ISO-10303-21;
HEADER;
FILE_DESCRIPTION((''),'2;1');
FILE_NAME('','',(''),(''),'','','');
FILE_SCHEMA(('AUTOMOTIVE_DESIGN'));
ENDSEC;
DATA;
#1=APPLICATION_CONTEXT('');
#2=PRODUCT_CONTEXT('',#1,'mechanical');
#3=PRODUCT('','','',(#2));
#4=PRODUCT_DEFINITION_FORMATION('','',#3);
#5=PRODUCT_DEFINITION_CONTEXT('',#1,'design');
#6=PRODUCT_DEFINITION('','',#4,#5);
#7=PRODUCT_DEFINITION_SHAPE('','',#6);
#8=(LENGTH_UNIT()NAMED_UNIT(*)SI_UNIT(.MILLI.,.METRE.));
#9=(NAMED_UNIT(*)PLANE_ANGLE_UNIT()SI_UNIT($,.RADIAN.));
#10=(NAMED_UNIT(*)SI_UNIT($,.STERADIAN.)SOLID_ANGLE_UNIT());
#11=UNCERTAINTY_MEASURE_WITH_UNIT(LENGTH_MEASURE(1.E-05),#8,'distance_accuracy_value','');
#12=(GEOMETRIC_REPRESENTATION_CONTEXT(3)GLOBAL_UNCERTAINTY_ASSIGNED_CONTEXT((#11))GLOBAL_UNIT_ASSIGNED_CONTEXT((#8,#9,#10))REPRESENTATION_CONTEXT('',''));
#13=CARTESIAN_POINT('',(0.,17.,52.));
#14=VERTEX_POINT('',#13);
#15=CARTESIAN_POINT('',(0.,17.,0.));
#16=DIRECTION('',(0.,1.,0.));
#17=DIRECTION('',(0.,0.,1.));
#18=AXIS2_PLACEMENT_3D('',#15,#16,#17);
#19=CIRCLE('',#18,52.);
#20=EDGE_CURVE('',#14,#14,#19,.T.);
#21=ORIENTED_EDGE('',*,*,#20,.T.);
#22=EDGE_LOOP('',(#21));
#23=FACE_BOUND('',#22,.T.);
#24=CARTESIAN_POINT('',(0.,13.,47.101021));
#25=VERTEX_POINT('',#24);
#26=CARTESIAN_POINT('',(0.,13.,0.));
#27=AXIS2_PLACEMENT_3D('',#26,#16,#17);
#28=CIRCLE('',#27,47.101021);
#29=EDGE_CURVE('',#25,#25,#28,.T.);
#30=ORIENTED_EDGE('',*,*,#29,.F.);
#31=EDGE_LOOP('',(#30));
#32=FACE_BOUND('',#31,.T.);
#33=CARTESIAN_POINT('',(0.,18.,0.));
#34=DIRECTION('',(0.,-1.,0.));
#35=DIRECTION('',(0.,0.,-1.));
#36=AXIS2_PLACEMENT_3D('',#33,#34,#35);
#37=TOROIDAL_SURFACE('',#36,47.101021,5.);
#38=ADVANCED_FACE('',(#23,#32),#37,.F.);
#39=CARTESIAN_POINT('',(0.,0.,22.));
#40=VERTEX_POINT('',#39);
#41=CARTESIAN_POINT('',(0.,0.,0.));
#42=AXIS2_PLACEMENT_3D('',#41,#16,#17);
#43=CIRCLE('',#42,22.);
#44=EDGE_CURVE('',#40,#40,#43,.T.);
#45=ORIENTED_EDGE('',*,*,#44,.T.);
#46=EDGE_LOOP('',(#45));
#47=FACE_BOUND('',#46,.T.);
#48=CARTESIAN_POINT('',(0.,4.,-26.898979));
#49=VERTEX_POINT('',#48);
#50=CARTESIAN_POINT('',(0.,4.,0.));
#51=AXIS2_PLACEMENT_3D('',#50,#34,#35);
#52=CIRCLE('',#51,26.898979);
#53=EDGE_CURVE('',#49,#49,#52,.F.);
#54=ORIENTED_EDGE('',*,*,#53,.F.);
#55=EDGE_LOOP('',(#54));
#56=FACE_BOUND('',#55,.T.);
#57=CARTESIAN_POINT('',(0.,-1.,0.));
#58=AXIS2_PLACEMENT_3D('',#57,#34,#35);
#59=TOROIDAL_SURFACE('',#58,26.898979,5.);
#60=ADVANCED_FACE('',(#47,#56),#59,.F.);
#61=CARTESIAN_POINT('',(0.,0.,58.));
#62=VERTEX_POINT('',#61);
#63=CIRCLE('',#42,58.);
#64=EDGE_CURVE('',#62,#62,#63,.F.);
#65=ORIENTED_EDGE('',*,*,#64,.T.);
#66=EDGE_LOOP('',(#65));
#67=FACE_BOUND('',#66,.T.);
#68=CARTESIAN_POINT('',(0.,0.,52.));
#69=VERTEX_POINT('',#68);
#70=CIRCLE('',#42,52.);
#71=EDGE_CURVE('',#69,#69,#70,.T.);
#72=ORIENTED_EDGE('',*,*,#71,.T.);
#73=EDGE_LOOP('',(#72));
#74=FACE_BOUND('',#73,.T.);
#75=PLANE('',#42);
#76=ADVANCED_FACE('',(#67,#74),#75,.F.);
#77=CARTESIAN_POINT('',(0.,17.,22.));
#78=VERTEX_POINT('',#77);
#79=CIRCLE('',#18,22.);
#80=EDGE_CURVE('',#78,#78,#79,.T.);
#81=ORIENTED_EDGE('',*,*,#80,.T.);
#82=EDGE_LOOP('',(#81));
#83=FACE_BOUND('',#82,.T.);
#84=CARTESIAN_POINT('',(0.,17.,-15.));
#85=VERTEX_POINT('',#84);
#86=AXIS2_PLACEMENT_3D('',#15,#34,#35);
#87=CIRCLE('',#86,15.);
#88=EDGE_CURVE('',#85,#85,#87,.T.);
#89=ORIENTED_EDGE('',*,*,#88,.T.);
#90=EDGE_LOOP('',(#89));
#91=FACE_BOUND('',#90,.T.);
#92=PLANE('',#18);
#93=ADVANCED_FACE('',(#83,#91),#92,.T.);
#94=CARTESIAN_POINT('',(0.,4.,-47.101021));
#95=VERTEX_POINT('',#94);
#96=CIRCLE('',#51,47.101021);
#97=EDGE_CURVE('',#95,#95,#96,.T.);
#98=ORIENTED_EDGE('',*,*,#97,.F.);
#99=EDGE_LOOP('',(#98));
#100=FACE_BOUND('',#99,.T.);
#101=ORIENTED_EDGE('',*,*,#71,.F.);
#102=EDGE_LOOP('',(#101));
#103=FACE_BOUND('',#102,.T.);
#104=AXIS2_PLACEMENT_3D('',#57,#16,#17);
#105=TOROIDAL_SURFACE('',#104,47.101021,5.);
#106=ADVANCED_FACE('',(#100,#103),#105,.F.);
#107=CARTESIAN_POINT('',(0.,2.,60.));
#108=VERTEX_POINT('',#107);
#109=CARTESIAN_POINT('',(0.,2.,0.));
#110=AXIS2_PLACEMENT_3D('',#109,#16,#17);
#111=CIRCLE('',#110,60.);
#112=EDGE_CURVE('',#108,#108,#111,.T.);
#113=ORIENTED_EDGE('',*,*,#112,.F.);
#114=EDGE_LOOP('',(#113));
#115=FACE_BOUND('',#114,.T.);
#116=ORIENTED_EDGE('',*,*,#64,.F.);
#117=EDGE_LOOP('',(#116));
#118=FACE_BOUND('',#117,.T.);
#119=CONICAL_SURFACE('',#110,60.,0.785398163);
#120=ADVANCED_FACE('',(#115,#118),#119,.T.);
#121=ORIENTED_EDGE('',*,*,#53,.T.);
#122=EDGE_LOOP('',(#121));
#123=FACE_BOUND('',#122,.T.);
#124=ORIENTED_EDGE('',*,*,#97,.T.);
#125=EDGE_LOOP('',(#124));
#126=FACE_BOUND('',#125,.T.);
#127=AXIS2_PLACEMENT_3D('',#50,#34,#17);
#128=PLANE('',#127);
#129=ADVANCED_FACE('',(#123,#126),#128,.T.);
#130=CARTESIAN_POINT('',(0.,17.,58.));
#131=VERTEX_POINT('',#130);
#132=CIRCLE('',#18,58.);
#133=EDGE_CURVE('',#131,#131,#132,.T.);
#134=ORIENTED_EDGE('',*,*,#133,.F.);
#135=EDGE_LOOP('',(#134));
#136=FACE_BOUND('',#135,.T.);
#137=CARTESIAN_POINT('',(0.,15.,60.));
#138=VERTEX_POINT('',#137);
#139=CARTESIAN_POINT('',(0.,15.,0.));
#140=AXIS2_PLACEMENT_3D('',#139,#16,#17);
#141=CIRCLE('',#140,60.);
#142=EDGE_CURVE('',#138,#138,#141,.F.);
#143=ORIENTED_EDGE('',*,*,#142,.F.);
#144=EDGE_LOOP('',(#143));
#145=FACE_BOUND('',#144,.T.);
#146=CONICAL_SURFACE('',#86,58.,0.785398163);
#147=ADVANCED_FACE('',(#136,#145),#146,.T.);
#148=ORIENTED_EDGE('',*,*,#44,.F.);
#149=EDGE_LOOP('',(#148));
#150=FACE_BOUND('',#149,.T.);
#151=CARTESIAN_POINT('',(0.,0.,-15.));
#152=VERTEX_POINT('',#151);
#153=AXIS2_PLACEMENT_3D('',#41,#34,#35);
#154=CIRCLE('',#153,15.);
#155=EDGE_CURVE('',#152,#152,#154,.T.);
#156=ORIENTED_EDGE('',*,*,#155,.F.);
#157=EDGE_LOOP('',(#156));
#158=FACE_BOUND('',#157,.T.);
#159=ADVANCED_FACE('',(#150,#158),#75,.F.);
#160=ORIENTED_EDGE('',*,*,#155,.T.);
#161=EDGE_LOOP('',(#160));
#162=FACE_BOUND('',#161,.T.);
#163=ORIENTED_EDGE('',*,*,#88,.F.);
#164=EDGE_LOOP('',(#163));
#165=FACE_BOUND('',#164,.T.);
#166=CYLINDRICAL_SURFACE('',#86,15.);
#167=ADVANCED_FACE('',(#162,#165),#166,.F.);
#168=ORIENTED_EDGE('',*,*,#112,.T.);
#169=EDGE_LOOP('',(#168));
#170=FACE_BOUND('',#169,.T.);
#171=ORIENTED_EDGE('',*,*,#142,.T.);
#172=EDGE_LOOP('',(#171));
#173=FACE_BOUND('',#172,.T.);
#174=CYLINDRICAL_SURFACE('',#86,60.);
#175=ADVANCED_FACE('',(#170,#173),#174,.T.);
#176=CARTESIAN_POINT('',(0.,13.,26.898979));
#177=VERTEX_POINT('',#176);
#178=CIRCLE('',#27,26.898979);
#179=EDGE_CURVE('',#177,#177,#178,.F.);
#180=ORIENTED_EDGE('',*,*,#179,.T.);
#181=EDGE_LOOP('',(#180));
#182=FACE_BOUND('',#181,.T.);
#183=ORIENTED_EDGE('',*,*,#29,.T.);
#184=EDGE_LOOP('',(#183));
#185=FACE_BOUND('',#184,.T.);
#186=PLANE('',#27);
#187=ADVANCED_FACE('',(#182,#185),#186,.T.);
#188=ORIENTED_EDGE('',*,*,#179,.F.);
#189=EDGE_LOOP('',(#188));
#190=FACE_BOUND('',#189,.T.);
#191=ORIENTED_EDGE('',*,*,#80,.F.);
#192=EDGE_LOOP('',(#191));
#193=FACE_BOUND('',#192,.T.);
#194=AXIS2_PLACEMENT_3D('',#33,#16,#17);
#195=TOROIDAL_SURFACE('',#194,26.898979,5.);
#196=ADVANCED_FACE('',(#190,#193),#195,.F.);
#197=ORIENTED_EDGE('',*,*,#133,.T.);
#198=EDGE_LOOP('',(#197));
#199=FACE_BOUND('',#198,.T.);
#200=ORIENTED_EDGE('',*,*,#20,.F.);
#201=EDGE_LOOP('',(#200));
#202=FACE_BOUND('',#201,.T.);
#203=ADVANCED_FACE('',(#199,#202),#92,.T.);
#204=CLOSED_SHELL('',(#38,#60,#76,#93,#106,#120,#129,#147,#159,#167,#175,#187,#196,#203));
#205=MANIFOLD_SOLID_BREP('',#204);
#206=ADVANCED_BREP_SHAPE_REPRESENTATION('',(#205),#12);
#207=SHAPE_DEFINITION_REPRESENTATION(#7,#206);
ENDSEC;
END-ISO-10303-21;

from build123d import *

# Parameters (mm, degrees)
SKETCH1_R           = 60
BOSS_EXTRUDE1_DEPTH = 17
SKETCH2_R           = 52
SKETCH2_R_2         = 22
CUT_EXTRUDE1_DEPTH  = 4
FILLET1_R           = 5
CHAMFER1_SIZE       = 2
SKETCH3_R           = 15
CUT_EXTRUDE2_DEPTH  = 87.539008545


with BuildPart() as part:
    # Sketch1 → Boss-Extrude1 (new body)
    with BuildSketch(Plane(origin=(0, 0, 0), x_dir=(1, 0, 0), z_dir=(0, 1, 0))):
        with Locations(Location((0, 0, 0), (0, 0, 270))):
            Circle(SKETCH1_R)
    extrude(amount=BOSS_EXTRUDE1_DEPTH)

    # Sketch2 → Cut-Extrude1 (cut)
    with BuildSketch(Plane(origin=(0, 17, 0), x_dir=(1, 0, 0), z_dir=(0, 1, 0))):
        with Locations(Location((0, 0, 0), (0, 0, 270))):
            Circle(SKETCH2_R)
        with Locations(Location((0, 0, 0), (0, 0, 270))):
            Circle(SKETCH2_R_2, mode=Mode.SUBTRACT)
    cut_extrude1 = extrude(amount=-CUT_EXTRUDE1_DEPTH, mode=Mode.SUBTRACT)

    # Mirror1: Cut-Extrude1 across plane
    add(cut_extrude1.mirror(Plane.ZX.offset(8.5)), mode=Mode.SUBTRACT)

    # Fillet1
    # the kernel refuses this fillet: 5 mm, written as the material it adds along each edge
    with BuildSketch(Plane(origin=(0, 4, 0), x_dir=(0, 0, 1), z_dir=(-1, 0, 0))) as fillet1_piece_1:
        with BuildLine():
            CenterArc((47.101020514, -5), FILLET1_R, 11.536959033, 78.463040967)
            Line((47.101020514, 0), (47.101020514, 0.1))
            Line((47.101020514, 0.1), (52, 0.1))
            Line((52, 0.1), (52.1, 0))
            ThreePointArc((52.1, 0), (52.1, -2), (52.09797959, -3.98))
            Line((52.09797959, -3.98), (52, -4))
        make_face()
    revolve(axis=Axis((0, 4, 0), (0, 1, 0)))
    with BuildSketch(Plane(origin=(0, 4, 0), x_dir=(0, 0, 1), z_dir=(-1, 0, 0))) as fillet1_piece_2:
        with BuildLine():
            CenterArc((26.898979486, -5), FILLET1_R, 90, 78.463040967)
            Line((22, -4), (21.90202041, -3.98))
            ThreePointArc((21.90202041, -3.98), (21.9, -2), (21.9, 0))
            Line((21.9, 0), (22, 0.1))
            Line((22, 0.1), (26.898979486, 0.1))
            Line((26.898979486, 0.1), (26.898979486, 0))
        make_face()
    revolve(axis=Axis((0, 4, 0), (0, 1, 0)))
    with BuildSketch(Plane(origin=(0, 13, 0), x_dir=(0, 0, 1), z_dir=(-1, 0, 0))) as fillet1_piece_3:
        with BuildLine():
            CenterArc((47.101020514, 5), FILLET1_R, 270, 78.463040967)
            Line((47.101020514, 0), (47.101020514, -0.1))
            Line((47.101020514, -0.1), (52, -0.1))
            Line((52, -0.1), (52.1, 0))
            ThreePointArc((52.1, 0), (52.1, 2), (52.09797959, 3.98))
            Line((52.09797959, 3.98), (52, 4))
        make_face()
    revolve(axis=Axis((0, 13, 0), (0, 1, 0)))
    with BuildSketch(Plane(origin=(0, 13, 0), x_dir=(0, 0, 1), z_dir=(-1, 0, 0))) as fillet1_piece_4:
        with BuildLine():
            CenterArc((26.898979486, 5), FILLET1_R, 191.536959033, 78.463040967)
            Line((22, 4), (21.90202041, 3.98))
            ThreePointArc((21.90202041, 3.98), (21.9, 2), (21.9, 0))
            Line((21.9, 0), (22, -0.1))
            Line((22, -0.1), (26.898979486, -0.1))
            Line((26.898979486, -0.1), (26.898979486, 0))
        make_face()
    revolve(axis=Axis((0, 13, 0), (0, 1, 0)))

    # Chamfer1
    chamfer1_edges = [part.edges().sort_by_distance(p)[0] for p in [
        (0, 0, -60),
        (0, 17, -60),
    ]]
    chamfer(chamfer1_edges, length=CHAMFER1_SIZE)

    # Sketch3 → Cut-Extrude2 (cut, through all)
    with BuildSketch(Plane.XZ):
        with Locations(Location((0, 0, 0), (0, 0, 270))):
            Circle(SKETCH3_R)
    extrude(amount=-CUT_EXTRUDE2_DEPTH, mode=Mode.SUBTRACT)


solid = part.part
